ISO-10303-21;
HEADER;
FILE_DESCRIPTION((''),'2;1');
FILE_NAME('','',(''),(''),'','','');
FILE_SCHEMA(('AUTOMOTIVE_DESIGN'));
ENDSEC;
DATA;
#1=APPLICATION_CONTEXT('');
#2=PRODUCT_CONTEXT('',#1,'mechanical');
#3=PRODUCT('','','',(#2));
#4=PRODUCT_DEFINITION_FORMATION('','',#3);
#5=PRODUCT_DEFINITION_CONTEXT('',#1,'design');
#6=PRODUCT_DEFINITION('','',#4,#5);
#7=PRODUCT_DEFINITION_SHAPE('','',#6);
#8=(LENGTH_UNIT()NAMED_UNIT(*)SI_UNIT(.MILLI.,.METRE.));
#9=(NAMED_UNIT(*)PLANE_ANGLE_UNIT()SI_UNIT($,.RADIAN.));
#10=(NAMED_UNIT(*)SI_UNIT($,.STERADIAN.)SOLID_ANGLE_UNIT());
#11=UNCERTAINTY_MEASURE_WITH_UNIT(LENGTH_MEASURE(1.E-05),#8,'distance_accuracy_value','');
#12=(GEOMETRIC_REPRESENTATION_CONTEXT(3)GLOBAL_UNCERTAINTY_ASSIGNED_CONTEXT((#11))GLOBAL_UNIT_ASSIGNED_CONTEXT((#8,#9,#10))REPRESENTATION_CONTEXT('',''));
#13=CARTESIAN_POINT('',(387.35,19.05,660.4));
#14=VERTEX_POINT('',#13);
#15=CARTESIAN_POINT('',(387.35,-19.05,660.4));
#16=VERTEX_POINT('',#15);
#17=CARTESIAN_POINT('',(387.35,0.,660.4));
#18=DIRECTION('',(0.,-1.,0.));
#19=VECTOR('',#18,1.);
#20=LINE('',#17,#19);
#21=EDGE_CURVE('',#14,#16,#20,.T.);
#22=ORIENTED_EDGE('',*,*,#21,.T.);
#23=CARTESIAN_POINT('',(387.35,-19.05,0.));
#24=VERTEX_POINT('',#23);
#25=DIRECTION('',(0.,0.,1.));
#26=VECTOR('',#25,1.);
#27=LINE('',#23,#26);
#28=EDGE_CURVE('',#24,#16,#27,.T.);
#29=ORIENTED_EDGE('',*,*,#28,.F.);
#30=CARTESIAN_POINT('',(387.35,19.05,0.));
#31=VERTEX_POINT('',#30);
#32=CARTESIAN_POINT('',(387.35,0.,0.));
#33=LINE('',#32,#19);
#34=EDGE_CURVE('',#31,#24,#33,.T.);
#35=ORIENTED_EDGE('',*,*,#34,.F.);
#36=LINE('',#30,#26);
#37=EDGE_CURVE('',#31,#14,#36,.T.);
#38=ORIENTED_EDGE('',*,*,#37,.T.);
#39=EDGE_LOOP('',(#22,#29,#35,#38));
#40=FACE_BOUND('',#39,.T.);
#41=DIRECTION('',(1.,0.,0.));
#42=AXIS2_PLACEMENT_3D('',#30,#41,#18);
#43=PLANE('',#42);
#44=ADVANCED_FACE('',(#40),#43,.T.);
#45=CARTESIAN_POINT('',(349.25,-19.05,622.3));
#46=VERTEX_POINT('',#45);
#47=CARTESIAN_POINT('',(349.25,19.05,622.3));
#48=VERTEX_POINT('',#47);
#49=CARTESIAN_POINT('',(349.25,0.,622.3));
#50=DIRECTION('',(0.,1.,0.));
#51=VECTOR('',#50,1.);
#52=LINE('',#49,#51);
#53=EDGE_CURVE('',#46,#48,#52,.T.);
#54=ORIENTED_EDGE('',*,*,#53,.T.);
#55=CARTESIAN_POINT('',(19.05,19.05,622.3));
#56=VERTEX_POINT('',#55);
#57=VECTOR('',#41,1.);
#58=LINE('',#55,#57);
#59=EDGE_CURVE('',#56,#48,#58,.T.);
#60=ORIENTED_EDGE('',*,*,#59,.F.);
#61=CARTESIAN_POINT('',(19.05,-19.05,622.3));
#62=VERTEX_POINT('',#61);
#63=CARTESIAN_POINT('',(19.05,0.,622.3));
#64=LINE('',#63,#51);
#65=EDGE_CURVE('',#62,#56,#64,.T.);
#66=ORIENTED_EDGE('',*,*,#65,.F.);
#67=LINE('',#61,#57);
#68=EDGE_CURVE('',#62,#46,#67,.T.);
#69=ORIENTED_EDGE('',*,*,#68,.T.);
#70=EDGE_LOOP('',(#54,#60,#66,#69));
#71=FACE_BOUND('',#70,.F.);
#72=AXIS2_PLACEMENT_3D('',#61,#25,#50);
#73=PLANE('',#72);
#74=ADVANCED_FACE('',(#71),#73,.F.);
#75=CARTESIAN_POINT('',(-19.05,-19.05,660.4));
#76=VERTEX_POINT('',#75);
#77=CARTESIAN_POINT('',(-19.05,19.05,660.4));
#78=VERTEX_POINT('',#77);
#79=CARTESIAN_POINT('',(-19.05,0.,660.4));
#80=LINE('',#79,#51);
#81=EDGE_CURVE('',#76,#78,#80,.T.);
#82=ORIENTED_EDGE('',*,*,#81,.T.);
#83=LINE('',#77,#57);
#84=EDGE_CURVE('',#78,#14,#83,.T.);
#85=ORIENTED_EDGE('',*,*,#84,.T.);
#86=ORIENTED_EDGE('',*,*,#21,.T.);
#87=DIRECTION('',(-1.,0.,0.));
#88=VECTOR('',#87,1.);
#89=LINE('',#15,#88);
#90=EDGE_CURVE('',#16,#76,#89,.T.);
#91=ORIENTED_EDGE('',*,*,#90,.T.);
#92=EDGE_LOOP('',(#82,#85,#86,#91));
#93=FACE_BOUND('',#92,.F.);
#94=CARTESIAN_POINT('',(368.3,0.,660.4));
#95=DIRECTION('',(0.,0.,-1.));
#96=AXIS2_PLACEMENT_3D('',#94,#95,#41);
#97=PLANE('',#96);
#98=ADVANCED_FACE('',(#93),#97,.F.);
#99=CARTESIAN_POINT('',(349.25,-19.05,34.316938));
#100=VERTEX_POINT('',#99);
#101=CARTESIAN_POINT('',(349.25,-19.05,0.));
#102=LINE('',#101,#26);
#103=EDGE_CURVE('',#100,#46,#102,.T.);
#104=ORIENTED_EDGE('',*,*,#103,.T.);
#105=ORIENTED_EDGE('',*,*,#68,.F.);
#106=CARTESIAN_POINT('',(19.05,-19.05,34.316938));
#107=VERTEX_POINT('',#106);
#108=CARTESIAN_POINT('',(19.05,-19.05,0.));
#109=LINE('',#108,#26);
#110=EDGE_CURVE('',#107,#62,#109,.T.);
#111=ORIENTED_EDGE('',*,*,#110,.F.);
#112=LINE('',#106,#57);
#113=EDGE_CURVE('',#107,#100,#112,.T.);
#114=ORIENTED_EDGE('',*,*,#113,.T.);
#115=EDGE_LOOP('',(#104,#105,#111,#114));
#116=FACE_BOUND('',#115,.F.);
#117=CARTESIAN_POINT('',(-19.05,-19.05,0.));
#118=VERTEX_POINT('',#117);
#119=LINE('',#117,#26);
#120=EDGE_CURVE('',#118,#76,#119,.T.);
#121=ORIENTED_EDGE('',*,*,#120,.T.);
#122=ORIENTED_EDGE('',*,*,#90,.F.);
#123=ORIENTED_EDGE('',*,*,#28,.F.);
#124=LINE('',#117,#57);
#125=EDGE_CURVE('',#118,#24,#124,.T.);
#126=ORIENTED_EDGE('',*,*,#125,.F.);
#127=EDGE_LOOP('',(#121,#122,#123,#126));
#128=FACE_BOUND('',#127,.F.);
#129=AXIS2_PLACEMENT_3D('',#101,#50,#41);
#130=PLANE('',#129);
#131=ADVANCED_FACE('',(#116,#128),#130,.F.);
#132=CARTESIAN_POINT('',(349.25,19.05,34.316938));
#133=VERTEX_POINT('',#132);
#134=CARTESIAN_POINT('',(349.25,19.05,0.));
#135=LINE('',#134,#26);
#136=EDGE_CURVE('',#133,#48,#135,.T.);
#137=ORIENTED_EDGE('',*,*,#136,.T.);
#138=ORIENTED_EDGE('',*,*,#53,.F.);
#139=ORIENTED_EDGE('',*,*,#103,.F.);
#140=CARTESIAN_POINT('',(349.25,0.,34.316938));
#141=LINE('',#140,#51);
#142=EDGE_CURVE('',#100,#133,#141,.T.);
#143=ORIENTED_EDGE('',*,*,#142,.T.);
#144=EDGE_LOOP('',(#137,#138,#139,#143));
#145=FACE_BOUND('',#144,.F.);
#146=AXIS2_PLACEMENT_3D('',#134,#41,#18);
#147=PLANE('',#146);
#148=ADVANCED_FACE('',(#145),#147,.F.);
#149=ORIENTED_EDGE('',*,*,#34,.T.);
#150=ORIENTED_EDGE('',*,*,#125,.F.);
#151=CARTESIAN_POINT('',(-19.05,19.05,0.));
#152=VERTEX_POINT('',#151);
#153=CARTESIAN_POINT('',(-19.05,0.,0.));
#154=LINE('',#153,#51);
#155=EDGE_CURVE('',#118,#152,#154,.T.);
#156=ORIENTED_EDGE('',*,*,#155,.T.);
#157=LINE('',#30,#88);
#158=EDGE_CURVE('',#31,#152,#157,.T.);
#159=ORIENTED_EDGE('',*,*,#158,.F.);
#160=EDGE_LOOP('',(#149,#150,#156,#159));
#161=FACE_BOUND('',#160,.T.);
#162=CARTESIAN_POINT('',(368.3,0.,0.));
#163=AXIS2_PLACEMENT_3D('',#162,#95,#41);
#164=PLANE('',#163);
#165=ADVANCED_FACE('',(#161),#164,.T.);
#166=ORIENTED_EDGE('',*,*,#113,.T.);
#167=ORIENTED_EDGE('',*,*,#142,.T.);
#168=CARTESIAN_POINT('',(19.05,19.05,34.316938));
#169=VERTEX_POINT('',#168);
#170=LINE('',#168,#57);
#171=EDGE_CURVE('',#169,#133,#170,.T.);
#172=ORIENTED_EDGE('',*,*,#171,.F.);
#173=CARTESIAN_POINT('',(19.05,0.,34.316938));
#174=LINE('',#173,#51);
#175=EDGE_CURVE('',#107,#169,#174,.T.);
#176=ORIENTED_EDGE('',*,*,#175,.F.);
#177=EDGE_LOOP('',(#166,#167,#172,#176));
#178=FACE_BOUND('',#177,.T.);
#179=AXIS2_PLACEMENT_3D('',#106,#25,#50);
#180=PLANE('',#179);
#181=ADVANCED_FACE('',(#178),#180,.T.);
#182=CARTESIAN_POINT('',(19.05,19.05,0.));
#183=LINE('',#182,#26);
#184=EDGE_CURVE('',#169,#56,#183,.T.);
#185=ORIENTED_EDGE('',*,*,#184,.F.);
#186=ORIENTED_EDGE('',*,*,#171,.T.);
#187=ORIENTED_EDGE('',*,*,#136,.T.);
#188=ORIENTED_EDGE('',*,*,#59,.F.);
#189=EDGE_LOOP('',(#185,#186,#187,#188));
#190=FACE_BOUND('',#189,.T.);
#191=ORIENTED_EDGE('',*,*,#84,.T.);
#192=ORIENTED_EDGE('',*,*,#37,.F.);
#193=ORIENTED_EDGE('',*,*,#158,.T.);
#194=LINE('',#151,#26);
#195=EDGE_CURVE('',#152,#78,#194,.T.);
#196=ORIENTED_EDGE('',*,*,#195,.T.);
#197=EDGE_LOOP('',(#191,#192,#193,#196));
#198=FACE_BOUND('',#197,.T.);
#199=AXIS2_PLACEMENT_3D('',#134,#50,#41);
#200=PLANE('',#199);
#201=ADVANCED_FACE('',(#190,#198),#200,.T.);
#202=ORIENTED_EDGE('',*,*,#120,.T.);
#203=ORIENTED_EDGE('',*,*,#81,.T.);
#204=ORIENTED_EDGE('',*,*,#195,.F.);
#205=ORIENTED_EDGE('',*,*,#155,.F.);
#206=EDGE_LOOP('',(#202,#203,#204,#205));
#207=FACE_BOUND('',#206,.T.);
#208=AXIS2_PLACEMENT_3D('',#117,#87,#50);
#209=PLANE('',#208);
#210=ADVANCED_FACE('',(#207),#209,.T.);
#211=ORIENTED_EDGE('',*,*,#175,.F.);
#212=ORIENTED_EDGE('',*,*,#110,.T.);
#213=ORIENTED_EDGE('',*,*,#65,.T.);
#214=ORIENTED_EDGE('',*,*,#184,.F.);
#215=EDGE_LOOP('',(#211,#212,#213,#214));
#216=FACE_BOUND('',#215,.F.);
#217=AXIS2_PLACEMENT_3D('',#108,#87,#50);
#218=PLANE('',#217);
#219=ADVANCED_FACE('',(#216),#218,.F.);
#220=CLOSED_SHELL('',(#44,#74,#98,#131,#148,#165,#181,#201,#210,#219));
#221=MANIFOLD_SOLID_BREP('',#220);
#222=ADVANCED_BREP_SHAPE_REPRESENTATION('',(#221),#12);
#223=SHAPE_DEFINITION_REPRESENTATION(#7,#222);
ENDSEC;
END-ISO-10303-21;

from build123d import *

# Parameters (mm, degrees)
F0_W     = 38.1
F0_H     = 38.1
F1_DEPTH = 660.4
F2_W     = 38.1
F2_H     = 38.1
F3_DEPTH = 330.2
F4_W     = 38.1
F4_H     = 34.3169383705
F5_DEPTH = 330.2
F6_W     = 38.1
F6_H     = 38.1
F7_DEPTH = 660.4


with BuildPart() as f1:
    # F0 (on Top) → F1 (new body)
    with BuildSketch(Plane.XY):
        Rectangle(F0_W, F0_H)
    extrude(amount=F1_DEPTH)

    # F2 (on face) → F3 (join)
    with BuildSketch(Plane.YZ.offset(19.05)):
        with Locations((0, 641.35)):
            Rectangle(F2_W, F2_H)
    extrude(amount=F3_DEPTH)

    # F4 (on face) → F5 (join)
    with BuildSketch(Plane.YZ.offset(19.05)):
        with Locations((0, 17.1584691852)):
            Rectangle(F4_W, F4_H)
    extrude(amount=F5_DEPTH)

    # F6 (on face) → F7 (join)
    with BuildSketch(Plane(origin=(0, 0, 0), x_dir=(1, 0, 0), z_dir=(0, 0, -1))):
        with Locations((368.3, 0)):
            Rectangle(F6_W, F6_H)
    extrude(amount=-F7_DEPTH)


solid = f1.part
